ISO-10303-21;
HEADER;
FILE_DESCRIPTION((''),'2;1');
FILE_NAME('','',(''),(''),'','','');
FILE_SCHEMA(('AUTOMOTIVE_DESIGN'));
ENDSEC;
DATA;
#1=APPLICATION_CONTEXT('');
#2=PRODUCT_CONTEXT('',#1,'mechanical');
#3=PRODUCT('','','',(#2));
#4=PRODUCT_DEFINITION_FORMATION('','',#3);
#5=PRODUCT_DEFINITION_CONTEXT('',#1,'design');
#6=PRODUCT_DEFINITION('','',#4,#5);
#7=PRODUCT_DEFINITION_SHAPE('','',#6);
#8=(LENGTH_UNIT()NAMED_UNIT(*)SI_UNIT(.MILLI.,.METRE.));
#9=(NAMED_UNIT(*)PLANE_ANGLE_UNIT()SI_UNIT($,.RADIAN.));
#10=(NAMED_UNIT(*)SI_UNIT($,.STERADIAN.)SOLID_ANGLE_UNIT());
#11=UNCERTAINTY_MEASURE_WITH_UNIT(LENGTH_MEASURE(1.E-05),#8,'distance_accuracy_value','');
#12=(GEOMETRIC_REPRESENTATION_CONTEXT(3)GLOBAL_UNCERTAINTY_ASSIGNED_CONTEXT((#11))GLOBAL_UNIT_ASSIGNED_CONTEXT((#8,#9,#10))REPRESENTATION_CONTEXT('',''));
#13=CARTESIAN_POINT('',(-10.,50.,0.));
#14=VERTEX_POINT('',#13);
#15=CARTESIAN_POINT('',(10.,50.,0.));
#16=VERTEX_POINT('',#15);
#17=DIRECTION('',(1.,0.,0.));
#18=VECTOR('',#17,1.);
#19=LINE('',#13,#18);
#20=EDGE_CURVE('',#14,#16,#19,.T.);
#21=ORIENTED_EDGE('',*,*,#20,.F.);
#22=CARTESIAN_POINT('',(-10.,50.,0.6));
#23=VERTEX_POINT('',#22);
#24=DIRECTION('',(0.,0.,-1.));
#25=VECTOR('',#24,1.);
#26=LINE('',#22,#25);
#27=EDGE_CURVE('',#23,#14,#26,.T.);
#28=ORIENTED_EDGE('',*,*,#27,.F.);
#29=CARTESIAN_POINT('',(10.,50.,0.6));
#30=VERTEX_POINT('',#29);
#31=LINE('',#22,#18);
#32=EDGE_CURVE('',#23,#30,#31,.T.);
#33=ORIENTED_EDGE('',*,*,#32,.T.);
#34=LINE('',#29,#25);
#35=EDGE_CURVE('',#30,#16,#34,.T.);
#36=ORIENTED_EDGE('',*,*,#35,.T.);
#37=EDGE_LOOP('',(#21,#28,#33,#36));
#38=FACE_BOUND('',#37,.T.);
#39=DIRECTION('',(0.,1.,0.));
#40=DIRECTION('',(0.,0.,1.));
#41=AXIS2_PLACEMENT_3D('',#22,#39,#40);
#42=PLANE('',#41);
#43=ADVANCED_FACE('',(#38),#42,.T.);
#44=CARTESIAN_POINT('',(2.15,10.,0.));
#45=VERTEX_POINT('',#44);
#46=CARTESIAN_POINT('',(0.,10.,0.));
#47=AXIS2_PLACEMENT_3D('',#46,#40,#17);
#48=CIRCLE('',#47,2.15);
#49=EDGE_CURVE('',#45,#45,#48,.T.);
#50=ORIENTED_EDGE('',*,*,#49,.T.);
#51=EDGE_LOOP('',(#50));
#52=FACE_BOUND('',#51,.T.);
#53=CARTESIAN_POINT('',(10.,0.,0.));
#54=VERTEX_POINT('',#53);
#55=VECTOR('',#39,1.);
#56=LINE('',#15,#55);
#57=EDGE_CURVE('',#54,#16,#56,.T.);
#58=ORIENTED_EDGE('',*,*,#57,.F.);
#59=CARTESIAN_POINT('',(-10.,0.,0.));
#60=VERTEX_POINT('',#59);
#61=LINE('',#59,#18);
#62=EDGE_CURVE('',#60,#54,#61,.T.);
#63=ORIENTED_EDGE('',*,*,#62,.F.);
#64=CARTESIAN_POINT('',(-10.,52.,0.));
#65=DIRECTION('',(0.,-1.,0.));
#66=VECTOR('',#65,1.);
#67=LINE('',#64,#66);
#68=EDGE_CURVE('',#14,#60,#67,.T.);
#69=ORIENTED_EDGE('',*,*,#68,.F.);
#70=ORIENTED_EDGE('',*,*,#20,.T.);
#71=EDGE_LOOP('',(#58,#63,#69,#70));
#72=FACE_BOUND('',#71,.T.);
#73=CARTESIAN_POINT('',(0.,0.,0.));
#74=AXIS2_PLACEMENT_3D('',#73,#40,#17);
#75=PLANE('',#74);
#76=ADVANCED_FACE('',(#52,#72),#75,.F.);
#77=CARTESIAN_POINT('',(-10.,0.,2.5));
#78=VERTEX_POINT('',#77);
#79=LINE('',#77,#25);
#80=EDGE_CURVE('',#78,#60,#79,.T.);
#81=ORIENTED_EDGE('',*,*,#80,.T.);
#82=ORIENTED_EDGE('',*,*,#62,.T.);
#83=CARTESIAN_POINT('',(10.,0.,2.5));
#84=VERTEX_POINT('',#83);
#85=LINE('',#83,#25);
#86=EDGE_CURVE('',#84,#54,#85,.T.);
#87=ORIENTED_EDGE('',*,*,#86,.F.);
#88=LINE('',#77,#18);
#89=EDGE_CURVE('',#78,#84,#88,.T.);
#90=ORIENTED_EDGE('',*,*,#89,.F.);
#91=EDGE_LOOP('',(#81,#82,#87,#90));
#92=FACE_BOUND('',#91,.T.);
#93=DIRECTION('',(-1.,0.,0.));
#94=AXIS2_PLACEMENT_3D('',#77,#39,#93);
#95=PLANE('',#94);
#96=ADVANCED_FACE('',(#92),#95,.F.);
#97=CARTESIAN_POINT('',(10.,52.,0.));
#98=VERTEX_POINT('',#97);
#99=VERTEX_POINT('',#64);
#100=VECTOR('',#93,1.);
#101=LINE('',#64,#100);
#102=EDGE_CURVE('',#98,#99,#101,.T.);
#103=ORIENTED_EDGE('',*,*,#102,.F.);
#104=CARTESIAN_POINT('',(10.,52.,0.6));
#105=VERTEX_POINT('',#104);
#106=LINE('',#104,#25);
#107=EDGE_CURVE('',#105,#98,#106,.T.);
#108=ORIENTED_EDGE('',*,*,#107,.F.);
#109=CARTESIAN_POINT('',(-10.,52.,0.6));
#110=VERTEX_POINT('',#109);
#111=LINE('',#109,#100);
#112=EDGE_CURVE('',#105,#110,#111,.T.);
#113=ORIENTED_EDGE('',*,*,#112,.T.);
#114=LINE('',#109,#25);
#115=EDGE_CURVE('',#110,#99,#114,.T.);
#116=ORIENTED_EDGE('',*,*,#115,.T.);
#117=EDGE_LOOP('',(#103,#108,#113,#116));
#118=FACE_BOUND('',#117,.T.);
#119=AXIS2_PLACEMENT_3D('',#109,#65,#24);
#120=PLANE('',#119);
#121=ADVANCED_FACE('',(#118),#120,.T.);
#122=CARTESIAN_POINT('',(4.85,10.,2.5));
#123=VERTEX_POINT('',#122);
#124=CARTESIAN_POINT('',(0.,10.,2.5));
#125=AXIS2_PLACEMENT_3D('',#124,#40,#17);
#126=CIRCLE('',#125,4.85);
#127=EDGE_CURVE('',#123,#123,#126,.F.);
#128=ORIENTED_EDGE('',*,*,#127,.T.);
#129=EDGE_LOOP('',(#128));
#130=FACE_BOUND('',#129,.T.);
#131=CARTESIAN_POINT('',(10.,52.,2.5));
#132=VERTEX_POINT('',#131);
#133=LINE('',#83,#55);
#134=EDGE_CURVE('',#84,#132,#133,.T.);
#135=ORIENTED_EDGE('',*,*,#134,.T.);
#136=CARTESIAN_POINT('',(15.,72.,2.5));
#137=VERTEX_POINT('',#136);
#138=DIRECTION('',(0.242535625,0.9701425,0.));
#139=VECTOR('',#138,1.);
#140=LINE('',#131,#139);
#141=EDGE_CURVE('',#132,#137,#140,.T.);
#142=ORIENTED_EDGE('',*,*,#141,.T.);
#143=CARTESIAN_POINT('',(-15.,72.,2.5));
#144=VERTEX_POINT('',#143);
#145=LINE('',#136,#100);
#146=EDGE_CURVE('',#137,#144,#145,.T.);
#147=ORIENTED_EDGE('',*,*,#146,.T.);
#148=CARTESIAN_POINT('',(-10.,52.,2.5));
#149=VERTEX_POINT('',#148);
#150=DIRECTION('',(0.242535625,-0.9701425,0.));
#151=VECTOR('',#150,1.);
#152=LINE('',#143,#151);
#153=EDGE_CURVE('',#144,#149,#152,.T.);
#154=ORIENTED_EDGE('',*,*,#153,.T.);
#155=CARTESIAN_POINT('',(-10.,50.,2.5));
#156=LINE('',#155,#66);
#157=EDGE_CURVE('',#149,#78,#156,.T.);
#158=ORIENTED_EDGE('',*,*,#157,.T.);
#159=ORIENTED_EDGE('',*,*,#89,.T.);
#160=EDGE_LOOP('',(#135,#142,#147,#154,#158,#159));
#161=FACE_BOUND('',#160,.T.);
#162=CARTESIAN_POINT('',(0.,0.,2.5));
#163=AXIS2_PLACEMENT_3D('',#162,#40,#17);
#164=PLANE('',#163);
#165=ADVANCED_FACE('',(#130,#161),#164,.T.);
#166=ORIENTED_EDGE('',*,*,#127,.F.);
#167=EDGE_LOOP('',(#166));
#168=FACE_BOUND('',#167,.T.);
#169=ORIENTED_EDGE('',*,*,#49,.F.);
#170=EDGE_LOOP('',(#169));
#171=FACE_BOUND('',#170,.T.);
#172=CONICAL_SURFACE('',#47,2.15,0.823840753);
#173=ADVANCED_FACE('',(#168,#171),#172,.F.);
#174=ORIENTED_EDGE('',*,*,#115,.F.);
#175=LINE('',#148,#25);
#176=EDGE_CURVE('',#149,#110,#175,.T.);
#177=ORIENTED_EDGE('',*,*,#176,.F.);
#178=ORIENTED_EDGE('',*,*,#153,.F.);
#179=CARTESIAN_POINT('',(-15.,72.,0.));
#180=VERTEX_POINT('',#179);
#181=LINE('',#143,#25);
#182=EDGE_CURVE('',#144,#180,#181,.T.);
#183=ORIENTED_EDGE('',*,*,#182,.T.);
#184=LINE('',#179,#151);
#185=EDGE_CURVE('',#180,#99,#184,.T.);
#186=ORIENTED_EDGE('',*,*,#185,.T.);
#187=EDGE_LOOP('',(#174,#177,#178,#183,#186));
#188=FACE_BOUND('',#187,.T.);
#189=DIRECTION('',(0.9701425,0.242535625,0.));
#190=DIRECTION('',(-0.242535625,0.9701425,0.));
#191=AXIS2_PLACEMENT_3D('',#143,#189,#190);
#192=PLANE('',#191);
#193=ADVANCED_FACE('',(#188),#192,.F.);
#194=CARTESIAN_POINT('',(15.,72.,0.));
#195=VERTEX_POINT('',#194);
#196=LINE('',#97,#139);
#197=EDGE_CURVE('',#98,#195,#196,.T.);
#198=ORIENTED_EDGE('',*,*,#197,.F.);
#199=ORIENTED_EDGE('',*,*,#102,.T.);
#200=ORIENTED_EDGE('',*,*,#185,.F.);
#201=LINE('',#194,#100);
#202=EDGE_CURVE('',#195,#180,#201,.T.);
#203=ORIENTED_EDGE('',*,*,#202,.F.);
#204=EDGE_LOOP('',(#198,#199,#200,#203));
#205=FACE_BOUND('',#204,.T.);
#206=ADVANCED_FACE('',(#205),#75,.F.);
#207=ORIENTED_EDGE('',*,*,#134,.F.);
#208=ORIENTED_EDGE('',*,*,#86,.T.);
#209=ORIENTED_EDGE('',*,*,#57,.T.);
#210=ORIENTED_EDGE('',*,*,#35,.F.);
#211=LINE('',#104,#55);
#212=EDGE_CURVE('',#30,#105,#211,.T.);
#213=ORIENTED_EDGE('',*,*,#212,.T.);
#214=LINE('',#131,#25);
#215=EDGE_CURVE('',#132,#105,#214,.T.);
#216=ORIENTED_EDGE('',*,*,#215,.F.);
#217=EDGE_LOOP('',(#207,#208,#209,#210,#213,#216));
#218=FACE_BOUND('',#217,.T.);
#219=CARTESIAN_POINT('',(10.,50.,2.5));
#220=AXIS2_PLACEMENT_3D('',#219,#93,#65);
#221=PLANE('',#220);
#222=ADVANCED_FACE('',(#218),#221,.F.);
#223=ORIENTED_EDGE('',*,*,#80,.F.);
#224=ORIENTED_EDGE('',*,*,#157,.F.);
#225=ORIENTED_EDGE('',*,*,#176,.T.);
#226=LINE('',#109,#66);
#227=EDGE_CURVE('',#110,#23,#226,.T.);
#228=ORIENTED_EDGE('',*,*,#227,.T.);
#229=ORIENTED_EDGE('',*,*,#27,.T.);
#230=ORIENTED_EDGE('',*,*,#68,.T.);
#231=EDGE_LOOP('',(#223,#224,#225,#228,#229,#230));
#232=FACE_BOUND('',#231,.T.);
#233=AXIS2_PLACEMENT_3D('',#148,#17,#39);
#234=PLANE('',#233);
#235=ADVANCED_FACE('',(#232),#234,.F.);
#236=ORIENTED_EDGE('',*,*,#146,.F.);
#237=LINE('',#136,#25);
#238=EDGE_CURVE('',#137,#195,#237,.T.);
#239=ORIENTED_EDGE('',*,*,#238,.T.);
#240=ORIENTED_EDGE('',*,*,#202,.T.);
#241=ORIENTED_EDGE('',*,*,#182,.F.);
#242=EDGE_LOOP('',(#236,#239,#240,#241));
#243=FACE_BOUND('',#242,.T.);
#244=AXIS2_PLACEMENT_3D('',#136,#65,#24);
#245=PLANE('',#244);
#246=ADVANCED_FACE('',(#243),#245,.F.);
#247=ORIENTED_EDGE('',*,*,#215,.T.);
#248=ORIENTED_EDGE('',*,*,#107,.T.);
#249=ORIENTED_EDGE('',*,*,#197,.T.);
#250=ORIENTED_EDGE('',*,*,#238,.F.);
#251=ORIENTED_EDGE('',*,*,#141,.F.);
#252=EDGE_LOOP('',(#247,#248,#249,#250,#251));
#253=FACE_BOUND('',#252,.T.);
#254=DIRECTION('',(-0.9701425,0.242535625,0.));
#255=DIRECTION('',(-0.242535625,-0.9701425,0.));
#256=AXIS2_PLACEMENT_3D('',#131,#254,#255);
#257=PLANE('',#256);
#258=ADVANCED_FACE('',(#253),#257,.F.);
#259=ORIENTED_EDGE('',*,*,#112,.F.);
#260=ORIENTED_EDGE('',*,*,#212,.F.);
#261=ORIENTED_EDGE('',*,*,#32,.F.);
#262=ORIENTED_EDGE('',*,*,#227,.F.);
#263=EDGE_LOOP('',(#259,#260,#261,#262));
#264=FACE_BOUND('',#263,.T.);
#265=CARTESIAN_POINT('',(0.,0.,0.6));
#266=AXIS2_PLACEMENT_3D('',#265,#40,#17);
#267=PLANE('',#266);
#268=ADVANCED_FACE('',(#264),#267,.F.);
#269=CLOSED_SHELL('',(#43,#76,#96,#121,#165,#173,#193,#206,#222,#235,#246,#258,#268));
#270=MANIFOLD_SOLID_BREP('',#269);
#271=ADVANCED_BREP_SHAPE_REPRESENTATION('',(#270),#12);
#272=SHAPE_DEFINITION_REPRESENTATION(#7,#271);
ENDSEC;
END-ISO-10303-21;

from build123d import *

# Parameters (mm, degrees)
DODANIE_WYCI_GNI_CIE1_DEPTH = 2.5
SZKIC2_W                    = 20
SZKIC2_H                    = 2
WYTNIJ_WYCI_GNI_CIE1_DEPTH  = 0.6
SZKIC3_R                    = 2.15
WYTNIJ_WYCI_GNI_CIE2_DEPTH  = 74.588382235
SFAZOWANIE1_SIZE2           = 2.5
SFAZOWANIE1_SIZE            = 2.7


with BuildPart() as part:
    # Szkic1 → Dodanie-wyciągnięcie1 (new body)
    with BuildSketch(Plane.XY):
        Polygon((-10, 0), (10, 0), (10, 50), (10, 52), (15, 72), (-15, 72), (-10, 52), (-10, 50), align=None)
    extrude(amount=DODANIE_WYCI_GNI_CIE1_DEPTH)

    # Szkic2 → Wytnij-wyciągnięcie1 (cut)
    with BuildSketch(Plane.XY):
        with Locations((0, 51)):
            Rectangle(SZKIC2_W, SZKIC2_H)
    extrude(amount=WYTNIJ_WYCI_GNI_CIE1_DEPTH, mode=Mode.SUBTRACT)

    # Szkic3 → Wytnij-wyciągnięcie2 (cut, through all)
    with BuildSketch(Plane.XY.offset(2.5)):
        with Locations((0, 10)):
            Circle(SZKIC3_R)
    extrude(amount=-WYTNIJ_WYCI_GNI_CIE2_DEPTH, mode=Mode.SUBTRACT)

    # Sfazowanie1
    sfazowanie1_edges = [part.edges().sort_by_distance(p)[0] for p in [
        (-2.15, 10, 2.5),
    ]]
    sfazowanie1_side = [part.faces().sort_by_distance(p)[0] for p in [
        (-2.2, 10, 2.5),
    ]]
    chamfer(sfazowanie1_edges, length=SFAZOWANIE1_SIZE - 0.0001, length2=SFAZOWANIE1_SIZE2 - 0.0001, reference=sfazowanie1_side[0])  # a hair under: the kernel refuses the full size


solid = part.part
